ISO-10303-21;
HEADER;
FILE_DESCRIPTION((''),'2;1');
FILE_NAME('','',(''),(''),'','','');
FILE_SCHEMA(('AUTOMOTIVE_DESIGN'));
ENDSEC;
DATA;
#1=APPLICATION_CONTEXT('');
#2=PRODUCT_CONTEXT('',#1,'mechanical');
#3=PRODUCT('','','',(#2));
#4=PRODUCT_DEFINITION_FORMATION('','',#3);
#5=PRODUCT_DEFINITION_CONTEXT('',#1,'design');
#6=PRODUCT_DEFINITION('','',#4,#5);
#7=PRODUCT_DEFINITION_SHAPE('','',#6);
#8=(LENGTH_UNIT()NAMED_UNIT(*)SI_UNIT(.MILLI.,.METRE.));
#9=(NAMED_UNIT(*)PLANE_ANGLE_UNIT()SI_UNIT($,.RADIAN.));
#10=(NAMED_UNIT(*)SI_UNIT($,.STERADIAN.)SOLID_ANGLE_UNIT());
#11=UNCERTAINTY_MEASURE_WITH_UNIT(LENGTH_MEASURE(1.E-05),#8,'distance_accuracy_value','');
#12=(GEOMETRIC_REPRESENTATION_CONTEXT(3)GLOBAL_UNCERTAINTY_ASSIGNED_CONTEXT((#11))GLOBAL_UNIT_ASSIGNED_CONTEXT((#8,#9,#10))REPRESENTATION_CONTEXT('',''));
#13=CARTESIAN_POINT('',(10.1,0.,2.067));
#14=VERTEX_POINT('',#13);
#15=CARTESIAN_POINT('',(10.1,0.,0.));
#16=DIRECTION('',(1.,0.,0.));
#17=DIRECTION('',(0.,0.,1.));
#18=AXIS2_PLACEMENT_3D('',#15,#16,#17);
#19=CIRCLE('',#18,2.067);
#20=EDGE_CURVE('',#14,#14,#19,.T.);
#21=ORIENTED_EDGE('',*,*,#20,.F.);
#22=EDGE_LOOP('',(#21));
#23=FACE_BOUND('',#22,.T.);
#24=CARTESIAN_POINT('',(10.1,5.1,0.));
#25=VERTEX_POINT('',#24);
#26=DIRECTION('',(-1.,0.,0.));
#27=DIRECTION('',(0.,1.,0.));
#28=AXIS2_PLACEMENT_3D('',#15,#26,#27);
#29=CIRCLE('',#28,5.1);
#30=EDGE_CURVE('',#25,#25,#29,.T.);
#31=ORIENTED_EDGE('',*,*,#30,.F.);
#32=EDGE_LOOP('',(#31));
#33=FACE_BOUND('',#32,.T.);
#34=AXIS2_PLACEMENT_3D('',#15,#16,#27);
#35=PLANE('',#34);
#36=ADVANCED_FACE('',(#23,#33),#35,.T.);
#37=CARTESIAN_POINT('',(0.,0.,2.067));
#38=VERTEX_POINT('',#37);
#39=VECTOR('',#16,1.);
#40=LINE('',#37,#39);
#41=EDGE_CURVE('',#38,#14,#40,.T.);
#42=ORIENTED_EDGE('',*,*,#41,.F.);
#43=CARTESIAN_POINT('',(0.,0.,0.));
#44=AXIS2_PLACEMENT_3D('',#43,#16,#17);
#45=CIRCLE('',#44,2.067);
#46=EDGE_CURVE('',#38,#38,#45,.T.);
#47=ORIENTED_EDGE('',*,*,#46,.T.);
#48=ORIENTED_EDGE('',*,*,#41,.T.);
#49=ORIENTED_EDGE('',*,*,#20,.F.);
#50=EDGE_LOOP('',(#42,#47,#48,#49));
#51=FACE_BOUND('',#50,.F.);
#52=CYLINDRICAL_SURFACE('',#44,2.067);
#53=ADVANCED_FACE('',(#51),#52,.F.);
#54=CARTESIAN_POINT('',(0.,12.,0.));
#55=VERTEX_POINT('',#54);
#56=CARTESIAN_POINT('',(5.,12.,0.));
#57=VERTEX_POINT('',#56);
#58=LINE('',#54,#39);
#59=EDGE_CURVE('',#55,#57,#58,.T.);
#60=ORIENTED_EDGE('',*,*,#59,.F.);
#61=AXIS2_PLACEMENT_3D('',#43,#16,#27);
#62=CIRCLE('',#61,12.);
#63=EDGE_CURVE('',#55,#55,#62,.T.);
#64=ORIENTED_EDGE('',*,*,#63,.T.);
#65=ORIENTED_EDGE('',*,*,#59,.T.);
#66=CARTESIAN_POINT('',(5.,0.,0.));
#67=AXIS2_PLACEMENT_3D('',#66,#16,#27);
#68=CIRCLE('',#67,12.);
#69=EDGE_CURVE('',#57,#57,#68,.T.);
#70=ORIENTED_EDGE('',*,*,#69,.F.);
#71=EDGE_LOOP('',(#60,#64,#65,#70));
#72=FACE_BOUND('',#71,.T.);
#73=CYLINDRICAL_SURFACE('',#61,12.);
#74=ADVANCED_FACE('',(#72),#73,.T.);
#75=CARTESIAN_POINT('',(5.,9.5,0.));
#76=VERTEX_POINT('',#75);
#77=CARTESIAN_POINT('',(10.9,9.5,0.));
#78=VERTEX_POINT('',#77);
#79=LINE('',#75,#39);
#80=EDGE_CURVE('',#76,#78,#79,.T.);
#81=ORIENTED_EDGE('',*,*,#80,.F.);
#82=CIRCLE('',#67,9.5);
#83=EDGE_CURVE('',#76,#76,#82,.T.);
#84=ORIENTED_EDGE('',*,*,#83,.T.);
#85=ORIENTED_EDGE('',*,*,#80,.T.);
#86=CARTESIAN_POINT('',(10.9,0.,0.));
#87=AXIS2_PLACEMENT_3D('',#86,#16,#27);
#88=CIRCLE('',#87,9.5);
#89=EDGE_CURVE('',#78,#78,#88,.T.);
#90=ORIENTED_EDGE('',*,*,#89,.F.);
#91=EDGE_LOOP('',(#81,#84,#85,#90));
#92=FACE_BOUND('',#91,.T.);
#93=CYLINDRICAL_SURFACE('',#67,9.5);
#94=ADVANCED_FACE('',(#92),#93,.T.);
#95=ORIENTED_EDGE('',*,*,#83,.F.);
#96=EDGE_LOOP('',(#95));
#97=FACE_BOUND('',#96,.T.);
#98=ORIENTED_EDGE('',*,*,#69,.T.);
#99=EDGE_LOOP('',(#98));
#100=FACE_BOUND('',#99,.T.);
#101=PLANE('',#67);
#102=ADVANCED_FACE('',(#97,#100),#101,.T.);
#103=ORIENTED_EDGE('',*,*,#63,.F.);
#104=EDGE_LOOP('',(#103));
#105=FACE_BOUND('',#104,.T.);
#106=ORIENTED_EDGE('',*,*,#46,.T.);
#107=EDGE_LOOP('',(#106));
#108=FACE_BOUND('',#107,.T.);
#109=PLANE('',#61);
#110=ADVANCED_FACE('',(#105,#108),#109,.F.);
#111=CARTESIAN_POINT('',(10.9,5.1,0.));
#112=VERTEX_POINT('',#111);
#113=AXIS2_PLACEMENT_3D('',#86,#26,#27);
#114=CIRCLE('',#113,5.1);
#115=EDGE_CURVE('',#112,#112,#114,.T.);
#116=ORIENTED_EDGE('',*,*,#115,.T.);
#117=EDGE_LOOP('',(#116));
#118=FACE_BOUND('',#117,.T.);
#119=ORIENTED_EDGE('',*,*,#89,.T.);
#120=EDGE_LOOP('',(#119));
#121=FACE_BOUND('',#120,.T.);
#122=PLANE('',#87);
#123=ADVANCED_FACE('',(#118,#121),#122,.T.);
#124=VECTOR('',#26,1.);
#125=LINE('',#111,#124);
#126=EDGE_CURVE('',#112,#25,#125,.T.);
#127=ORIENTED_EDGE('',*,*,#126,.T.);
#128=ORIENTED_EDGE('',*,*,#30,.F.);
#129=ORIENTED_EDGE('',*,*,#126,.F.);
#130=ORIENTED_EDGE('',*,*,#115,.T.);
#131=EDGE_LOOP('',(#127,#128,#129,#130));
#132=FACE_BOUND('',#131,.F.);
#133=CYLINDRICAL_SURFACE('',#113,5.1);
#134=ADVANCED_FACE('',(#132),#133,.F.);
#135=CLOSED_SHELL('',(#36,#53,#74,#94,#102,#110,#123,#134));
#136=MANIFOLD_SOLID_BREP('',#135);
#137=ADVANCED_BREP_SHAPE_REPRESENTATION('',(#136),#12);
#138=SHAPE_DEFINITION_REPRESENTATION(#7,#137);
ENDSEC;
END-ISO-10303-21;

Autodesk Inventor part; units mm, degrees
ref_plane "YZ Plane" through (0, 0, 0) normal (1, 0, 0) x (0, 1, 0)
ref_plane "XZ Plane" through (0, 0, 0) normal (0, 1, 0) x (-1, 0, 0)
ref_plane "XY Plane" through (0, 0, 0) normal (0, 0, 1) x (1, 0, 0)
sketch "Skizze1" plane through (0, 0, 0) normal (0, 0, 1) x (1, 0, 0)
  line L0 (0, 0) -> (0, 12)
  line L1 (0, 12) -> (5, 12)
  line L2 (5, 12) -> (5, 9.5)
  line L3 (5, 9.5) -> (10.9, 9.5)
  line L4 (10.9, 9.5) -> (10.9, 5)
  line L5 (0, 0) -> (10.1, 0)
  line L6 (10.9, 5) -> (10.1, 5)
  line L7 (10.1, 5) -> (10.1, 0)
  dimension "d0" = 19
  dimension "d1" = 24
  dimension "d2" = 5.9
  dimension "d3" = 5
  dimension "d12" = 10
  dimension "d13" = 5.1
revolve "Umdrehung1" add sketch "Skizze1" angle 360 about axis through (0, 0, 0) along (1, 0, 0)
sketch "Skizze2" plane through (0, 0, 0) normal (-1, 0, 0) x (0, 0, 1)
  point P0 (0, 0)
  point P1 (0, 0)
hole "Bohrung1" at (0, 0, 0) direction (1, 0, 0) diameter 4.134 depth 14.2 tip angle 118 thread size "M5x0.8" class "6H" standard "ISO Metric profile"
feature "Verdickung1" [suppressed]
thicken "Verdickung2" operation add thickness 0.1 both sides no extend neighbours yes toward (0, 0.9967573, -0.0804666) faces at (10.3667, 4.9838, -0.4023)
properties part number "SpringCompensation_Innside_DrivenPart"
